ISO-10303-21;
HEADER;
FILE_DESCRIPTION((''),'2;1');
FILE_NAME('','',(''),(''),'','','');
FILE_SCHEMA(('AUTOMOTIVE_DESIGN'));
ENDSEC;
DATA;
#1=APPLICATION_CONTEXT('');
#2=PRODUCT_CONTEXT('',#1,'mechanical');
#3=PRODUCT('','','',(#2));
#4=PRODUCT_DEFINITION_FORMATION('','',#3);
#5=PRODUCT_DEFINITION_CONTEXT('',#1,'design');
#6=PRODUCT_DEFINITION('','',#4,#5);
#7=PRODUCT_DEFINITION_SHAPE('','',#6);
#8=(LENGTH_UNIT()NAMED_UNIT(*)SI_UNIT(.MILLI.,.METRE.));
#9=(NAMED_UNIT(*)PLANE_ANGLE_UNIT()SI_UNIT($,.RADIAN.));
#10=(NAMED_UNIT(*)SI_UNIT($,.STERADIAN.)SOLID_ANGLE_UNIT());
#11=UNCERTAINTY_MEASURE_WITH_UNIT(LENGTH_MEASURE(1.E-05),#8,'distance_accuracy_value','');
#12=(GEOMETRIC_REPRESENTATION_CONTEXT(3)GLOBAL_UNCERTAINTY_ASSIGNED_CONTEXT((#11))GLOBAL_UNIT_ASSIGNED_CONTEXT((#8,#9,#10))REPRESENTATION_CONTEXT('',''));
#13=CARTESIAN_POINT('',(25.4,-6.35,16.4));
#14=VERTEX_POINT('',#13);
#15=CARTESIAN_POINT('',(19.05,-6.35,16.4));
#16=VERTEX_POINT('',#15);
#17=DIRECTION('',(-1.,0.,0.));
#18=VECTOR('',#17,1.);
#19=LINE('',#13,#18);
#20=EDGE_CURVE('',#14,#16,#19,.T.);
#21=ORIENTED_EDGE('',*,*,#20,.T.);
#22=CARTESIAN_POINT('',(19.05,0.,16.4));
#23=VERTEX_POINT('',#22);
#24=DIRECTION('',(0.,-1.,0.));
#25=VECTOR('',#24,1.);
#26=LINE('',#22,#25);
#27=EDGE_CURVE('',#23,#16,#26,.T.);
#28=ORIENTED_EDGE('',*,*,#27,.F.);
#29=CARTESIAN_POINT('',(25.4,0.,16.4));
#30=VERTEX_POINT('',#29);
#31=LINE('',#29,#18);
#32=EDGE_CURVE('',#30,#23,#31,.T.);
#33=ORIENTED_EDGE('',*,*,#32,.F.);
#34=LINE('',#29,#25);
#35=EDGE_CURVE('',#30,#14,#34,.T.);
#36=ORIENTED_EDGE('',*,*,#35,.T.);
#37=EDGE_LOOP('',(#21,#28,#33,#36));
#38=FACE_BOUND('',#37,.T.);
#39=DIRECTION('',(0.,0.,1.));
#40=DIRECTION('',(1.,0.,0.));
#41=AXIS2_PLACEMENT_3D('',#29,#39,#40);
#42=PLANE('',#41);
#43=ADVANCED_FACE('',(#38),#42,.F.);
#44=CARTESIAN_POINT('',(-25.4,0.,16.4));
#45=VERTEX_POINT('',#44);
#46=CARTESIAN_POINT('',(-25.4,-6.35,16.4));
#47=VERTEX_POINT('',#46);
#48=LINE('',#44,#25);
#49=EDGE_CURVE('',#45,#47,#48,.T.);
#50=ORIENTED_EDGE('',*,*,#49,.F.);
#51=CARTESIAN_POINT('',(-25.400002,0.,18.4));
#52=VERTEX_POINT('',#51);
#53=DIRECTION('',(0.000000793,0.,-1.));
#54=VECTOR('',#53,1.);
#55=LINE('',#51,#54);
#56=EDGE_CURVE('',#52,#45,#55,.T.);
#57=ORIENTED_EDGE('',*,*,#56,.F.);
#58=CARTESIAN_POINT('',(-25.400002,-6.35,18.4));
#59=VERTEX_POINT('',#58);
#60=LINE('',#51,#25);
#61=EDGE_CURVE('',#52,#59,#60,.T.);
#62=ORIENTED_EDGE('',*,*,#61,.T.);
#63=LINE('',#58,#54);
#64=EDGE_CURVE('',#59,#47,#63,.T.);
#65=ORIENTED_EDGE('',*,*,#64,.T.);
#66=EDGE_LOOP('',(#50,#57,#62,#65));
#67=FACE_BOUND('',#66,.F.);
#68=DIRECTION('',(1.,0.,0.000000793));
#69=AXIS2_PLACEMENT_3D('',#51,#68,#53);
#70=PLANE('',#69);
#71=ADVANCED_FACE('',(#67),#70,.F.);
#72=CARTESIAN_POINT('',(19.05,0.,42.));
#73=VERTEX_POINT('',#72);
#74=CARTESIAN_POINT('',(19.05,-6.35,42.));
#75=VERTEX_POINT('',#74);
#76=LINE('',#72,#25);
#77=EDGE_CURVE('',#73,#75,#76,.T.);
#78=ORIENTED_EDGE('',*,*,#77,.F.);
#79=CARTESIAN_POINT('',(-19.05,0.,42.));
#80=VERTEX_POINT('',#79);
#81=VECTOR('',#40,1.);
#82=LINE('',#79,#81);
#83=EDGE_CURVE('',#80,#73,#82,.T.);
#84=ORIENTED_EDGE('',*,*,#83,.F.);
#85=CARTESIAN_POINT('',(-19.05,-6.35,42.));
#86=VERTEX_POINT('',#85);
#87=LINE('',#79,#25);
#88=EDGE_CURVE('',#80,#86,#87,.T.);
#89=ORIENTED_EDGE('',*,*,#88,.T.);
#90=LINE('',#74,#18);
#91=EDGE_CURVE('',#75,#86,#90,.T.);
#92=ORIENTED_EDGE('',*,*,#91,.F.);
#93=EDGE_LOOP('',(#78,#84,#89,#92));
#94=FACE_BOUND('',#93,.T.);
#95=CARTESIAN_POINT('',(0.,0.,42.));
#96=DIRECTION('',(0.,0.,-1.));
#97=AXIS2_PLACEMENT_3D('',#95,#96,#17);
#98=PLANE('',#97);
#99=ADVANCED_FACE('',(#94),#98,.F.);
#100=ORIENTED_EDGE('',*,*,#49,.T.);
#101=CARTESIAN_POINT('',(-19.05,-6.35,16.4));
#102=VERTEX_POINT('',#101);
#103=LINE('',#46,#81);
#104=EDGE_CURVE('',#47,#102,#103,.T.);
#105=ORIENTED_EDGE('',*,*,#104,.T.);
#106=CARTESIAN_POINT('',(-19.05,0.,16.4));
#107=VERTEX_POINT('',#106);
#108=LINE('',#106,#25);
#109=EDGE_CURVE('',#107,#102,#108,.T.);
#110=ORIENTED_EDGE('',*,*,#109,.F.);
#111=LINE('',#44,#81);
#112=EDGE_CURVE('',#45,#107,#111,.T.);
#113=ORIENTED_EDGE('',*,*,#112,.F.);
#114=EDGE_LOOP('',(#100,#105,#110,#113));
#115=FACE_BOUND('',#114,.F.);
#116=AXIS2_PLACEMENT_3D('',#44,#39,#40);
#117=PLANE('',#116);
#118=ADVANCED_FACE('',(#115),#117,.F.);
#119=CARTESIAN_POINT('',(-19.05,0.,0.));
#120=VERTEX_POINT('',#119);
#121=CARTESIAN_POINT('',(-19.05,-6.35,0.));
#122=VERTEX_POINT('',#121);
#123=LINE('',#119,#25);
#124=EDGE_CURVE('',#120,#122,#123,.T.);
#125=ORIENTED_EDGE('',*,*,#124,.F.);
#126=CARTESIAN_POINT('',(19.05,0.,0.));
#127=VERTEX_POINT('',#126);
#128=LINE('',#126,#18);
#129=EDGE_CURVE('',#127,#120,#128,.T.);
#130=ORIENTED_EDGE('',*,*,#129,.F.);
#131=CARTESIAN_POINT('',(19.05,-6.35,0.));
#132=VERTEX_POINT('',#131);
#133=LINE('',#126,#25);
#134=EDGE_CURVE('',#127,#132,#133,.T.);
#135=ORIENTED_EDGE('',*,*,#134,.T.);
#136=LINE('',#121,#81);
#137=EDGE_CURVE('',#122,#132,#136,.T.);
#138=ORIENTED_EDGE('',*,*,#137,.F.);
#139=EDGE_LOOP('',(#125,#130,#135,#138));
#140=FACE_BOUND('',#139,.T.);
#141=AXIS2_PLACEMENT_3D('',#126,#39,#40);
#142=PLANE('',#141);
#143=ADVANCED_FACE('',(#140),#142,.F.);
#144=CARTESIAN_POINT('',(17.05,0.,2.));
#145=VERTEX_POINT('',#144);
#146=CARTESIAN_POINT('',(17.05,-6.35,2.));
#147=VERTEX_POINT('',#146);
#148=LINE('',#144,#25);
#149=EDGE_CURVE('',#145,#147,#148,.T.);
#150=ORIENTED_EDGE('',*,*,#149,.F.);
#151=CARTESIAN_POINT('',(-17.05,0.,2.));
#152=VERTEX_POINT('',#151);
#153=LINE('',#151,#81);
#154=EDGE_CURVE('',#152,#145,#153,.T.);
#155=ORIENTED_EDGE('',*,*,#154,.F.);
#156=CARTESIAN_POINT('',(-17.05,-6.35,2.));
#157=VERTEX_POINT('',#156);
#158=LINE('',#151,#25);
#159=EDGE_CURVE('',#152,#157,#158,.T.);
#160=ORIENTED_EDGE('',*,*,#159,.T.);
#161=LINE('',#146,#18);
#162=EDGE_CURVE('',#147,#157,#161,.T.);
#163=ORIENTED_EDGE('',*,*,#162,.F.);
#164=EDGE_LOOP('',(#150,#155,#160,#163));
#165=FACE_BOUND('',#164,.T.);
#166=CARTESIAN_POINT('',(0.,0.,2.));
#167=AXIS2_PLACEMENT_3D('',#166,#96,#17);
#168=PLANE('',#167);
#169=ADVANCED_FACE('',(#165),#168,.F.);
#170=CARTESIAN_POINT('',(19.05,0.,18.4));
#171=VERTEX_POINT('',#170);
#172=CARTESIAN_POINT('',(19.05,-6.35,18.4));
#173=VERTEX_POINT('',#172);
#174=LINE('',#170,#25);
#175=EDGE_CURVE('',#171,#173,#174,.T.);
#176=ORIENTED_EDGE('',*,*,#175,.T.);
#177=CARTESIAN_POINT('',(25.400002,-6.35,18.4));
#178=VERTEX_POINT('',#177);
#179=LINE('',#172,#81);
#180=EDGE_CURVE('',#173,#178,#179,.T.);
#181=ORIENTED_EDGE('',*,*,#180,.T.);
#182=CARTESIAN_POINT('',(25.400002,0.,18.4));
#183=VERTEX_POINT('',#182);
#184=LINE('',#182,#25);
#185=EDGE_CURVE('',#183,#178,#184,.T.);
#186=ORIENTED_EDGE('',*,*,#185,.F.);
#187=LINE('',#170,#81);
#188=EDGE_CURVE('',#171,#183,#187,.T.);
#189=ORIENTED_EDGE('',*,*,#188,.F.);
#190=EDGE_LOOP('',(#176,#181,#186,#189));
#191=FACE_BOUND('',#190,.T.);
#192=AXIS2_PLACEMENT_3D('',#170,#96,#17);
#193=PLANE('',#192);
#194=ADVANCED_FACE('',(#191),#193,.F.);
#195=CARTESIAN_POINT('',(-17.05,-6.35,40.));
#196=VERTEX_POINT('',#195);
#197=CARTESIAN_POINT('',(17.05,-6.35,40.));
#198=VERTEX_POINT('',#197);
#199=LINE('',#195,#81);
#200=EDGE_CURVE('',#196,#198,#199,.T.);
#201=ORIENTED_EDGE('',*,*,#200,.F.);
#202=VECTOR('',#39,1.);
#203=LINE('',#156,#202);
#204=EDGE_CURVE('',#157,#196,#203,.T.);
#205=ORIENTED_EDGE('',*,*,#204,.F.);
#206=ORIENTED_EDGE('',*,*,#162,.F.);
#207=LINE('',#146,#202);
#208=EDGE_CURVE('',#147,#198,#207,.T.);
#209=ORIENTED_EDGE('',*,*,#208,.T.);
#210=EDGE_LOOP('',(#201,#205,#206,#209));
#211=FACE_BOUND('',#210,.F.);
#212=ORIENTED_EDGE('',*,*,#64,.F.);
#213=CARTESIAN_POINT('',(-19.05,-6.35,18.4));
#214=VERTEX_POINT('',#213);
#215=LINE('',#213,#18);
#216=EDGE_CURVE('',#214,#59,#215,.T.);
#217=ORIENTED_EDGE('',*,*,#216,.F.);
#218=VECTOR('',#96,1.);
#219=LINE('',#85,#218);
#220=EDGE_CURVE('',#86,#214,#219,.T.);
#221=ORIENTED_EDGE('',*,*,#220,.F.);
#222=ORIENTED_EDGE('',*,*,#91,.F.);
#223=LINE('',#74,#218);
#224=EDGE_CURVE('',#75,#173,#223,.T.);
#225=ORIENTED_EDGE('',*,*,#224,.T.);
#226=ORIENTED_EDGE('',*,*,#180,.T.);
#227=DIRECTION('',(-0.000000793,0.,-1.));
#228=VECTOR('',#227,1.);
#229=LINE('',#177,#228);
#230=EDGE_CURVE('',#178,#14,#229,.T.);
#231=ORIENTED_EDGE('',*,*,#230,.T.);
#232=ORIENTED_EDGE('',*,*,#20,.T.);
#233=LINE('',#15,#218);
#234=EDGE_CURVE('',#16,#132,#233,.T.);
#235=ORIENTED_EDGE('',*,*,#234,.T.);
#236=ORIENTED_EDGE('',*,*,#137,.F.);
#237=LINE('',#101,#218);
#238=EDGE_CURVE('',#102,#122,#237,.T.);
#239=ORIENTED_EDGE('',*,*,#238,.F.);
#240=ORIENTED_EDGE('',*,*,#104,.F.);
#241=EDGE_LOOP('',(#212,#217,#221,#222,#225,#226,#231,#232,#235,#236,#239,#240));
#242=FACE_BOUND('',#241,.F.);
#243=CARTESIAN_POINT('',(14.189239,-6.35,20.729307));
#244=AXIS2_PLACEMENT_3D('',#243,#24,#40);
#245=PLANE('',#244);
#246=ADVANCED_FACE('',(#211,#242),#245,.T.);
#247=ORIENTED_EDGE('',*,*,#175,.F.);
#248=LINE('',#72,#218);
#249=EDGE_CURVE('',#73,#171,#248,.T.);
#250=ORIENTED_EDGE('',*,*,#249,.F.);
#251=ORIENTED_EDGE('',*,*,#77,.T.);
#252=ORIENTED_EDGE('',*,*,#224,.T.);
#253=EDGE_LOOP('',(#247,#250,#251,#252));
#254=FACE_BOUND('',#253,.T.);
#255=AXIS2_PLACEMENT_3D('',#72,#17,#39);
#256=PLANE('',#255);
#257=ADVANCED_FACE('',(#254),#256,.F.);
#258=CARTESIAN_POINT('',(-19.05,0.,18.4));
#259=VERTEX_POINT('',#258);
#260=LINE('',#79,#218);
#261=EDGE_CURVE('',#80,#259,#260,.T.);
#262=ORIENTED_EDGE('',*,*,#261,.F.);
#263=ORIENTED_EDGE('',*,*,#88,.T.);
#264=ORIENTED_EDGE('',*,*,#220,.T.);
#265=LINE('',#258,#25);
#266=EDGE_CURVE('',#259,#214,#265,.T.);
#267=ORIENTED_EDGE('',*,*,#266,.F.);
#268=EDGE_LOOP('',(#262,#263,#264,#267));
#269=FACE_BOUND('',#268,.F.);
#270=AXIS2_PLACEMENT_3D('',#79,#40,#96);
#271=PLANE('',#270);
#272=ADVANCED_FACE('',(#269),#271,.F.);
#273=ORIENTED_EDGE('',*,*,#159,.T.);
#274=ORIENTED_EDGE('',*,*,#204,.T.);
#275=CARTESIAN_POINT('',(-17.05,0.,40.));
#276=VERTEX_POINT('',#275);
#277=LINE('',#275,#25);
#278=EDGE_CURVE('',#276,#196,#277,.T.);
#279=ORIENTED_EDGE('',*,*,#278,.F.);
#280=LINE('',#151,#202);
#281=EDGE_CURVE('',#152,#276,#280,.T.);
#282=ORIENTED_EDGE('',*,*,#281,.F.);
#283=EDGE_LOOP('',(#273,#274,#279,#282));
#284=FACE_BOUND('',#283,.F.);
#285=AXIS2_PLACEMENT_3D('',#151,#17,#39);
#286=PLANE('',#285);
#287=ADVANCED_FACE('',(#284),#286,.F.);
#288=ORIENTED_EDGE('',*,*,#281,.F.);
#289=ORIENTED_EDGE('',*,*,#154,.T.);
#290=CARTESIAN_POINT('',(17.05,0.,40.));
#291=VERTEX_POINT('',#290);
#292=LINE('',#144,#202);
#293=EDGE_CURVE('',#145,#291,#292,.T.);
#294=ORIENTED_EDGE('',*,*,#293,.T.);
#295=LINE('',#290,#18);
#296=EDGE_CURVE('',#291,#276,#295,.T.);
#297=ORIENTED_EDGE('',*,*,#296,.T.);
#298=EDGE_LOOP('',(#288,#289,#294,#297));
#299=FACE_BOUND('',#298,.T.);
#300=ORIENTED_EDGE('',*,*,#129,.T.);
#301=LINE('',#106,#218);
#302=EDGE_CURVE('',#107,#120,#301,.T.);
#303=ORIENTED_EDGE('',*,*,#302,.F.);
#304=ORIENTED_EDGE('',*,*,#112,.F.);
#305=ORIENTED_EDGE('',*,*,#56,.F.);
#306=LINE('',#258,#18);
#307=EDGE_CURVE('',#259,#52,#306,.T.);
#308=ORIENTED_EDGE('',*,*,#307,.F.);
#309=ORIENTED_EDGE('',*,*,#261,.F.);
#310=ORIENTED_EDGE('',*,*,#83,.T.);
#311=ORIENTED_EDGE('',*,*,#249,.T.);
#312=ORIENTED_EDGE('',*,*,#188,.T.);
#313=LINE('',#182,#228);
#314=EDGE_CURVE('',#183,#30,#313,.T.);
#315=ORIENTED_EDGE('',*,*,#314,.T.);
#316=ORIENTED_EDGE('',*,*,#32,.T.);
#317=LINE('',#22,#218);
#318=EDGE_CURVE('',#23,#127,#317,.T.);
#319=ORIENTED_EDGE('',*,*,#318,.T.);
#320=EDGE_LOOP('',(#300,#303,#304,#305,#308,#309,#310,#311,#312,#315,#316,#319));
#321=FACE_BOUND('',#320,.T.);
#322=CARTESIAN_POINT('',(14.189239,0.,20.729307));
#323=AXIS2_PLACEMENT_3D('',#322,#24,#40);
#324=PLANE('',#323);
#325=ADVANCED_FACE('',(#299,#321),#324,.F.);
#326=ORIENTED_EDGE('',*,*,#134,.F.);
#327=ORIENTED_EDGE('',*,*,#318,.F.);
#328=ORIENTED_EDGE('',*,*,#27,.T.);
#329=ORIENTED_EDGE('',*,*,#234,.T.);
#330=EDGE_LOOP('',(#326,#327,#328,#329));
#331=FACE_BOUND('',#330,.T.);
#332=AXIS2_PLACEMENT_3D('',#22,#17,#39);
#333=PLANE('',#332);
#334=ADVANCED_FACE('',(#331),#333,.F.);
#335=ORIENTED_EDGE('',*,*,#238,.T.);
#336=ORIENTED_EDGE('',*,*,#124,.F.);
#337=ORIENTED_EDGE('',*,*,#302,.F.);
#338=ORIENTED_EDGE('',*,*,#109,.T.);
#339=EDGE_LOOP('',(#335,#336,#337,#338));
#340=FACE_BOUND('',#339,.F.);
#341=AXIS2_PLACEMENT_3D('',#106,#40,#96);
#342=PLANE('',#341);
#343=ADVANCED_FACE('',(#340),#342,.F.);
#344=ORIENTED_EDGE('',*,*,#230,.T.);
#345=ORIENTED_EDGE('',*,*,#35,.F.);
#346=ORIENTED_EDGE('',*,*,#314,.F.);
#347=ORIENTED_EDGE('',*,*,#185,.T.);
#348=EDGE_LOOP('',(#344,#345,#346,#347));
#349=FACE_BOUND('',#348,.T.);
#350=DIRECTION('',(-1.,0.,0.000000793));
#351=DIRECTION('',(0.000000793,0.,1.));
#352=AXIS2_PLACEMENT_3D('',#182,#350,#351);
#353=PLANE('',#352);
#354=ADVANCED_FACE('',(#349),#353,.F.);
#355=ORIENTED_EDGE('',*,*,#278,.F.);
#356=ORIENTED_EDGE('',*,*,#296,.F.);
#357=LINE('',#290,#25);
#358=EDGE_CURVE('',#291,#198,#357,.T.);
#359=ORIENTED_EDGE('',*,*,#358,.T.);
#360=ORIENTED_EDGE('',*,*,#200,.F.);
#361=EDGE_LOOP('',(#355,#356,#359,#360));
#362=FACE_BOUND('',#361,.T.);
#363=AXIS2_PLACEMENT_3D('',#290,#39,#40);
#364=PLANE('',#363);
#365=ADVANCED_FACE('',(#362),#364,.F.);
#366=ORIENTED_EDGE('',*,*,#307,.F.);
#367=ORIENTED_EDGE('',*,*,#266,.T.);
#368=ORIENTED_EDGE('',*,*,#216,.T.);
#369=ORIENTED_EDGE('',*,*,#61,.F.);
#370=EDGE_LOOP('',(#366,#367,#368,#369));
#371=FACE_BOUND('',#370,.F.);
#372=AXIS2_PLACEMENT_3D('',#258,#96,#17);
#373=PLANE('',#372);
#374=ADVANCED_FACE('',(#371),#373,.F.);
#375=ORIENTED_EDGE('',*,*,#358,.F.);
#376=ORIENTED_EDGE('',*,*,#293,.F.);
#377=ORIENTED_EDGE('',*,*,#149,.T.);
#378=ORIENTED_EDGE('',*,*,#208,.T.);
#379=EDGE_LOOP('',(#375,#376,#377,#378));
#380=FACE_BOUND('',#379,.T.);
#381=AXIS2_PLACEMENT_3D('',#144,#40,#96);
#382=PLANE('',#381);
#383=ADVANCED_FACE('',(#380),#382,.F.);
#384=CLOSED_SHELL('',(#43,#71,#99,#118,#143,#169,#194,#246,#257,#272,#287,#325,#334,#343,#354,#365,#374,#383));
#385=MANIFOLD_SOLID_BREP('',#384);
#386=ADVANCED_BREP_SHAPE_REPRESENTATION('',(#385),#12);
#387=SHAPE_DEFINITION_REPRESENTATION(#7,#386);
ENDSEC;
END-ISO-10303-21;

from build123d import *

# Parameters (mm, degrees)
F1_DEPTH = 6.35


# Not quite as in the source:
# - a length typed as a fraction of an inch, garbled in the dataset ("3 / 203.2 mm" for 3/8 in), is restored


with BuildPart() as f1:
    # F0 (on Front) → F1 (new body)
    with BuildSketch(Plane.XZ):
        Polygon((-25.4000015863, 18.4), (-25.4, 16.4), (-19.05, 16.4), (-19.05, 0), (0, 0), (0, 2), (-17.05, 2), (-17.05, 40), (0, 40), (0, 42), (-19.05, 42), (-19.05, 18.4), align=None)
    extrude(amount=F1_DEPTH)

    # F2: F1 across plane


with BuildPart() as f1_1:
    add(f1.part)
    add(f1.part.mirror(Plane.YZ))


solid = f1_1.part
